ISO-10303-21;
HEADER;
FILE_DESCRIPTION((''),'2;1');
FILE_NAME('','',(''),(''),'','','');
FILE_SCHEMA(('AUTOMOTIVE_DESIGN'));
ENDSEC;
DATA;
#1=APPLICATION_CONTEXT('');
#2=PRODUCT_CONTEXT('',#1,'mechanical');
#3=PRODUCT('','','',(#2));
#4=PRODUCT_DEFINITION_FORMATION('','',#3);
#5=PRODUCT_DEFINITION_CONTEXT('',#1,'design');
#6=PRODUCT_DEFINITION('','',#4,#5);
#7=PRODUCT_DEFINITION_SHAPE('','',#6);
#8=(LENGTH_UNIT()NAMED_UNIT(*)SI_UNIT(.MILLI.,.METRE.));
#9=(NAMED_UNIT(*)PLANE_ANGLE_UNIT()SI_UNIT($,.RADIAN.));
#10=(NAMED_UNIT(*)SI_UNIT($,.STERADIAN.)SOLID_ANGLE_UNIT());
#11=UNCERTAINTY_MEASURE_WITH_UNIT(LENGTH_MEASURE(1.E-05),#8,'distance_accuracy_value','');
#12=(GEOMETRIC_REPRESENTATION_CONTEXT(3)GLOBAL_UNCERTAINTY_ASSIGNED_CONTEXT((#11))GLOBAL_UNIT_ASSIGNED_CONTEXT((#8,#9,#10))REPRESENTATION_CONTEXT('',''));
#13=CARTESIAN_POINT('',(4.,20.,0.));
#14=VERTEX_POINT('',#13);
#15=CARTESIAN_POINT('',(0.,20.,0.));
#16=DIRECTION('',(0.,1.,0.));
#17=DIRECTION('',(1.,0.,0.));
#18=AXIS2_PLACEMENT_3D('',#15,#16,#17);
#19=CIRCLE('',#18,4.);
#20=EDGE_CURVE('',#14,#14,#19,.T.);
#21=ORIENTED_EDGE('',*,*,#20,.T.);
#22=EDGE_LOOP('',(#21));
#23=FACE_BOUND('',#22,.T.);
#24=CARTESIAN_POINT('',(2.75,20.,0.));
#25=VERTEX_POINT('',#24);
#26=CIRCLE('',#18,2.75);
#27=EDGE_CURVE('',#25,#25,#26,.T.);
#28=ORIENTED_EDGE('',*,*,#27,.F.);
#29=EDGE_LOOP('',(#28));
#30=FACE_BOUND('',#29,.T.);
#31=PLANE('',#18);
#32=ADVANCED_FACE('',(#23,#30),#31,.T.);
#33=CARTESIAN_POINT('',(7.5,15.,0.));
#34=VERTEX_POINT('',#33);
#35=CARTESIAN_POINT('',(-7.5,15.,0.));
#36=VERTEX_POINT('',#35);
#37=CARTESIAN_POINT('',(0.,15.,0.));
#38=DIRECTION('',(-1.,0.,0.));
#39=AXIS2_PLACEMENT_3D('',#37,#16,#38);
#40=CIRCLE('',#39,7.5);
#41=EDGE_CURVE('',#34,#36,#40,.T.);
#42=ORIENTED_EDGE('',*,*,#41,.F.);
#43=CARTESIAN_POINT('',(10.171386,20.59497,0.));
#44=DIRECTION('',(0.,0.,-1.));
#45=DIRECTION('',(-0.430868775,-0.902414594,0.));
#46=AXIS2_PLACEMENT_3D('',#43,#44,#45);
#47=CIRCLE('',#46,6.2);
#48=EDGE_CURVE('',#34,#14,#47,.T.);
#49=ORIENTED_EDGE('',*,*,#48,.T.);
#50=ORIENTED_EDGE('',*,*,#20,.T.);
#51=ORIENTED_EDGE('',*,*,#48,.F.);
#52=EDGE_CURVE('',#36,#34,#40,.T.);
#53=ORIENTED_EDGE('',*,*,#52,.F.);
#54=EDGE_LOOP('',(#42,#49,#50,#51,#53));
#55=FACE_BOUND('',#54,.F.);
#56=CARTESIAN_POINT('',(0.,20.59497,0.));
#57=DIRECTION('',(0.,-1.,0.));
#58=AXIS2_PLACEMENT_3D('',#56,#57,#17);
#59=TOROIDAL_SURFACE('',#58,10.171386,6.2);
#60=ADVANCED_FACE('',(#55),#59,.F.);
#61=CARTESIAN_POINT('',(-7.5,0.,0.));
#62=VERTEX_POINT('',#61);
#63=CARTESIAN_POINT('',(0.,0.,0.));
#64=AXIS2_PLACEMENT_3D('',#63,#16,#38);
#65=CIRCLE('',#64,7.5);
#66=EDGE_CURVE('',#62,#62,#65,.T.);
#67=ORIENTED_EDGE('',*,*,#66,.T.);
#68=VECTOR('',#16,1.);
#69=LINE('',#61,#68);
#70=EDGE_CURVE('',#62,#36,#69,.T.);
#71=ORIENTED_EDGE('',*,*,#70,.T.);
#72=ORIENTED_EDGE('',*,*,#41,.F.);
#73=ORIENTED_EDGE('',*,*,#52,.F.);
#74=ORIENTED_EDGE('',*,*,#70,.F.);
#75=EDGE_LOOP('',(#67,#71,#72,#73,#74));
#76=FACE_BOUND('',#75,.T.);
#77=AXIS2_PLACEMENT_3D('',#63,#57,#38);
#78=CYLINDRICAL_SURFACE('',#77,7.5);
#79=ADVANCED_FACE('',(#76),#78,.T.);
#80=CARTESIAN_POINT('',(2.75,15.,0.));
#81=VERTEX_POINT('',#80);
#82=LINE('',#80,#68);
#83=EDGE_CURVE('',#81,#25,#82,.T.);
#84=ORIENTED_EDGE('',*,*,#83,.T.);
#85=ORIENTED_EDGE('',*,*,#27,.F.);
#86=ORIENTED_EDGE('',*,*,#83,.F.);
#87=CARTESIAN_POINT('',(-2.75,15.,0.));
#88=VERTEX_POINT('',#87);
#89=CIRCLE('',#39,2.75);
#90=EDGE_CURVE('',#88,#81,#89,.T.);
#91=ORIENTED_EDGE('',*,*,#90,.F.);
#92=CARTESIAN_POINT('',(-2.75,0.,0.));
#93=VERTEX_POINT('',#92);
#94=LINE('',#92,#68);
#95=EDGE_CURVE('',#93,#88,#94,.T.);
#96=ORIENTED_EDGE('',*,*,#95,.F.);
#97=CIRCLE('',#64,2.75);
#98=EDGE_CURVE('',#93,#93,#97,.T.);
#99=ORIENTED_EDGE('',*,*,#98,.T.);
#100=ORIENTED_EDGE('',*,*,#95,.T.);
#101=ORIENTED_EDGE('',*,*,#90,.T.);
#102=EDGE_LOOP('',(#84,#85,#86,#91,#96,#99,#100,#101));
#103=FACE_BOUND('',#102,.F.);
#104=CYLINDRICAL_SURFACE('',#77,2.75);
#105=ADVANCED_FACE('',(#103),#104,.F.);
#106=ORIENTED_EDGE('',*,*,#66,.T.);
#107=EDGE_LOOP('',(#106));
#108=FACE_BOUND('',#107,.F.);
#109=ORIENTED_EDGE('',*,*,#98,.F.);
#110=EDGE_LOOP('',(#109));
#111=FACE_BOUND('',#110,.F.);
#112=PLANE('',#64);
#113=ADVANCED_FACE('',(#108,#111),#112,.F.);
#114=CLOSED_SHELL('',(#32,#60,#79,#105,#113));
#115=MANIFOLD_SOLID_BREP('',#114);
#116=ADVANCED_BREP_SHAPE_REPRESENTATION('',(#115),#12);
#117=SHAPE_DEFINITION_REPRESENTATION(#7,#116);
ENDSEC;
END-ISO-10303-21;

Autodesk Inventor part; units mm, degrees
ref_plane "YZ Plane" through (0, 0, 0) normal (1, 0, 0) x (0, 1, 0)
ref_plane "XZ Plane" through (0, 0, 0) normal (0, 1, 0) x (-1, 0, 0)
ref_plane "XY Plane" through (0, 0, 0) normal (0, 0, 1) x (1, 0, 0)
sketch "Sketch1" plane through (0, 0, 0) normal (0, 1, 0) x (-1, 0, 0)
  circle A0 centre (0, 0) radius 7.5
  circle A1 centre (0, 0) radius 2.75
  dimension "d0" = 15
  dimension "d1" = 5.5
extrude "Extrusion1" add sketch "Sketch1" along normal blind 15
sketch "Sketch2" plane through (0, 15, 0) normal (0, 1, 0) x (1, 0, 0)
  circle A0 centre (0, 0) radius 2.75
  circle A1 centre (0, 0) radius 2.75 projected
  circle A2 centre (0, 0) radius 4
  dimension "d4" = 5.5
  dimension "d5" = 8
extrude "Extrusion2" add sketch "Sketch2" along normal blind 5
fillet "Fillet1" radius 6.2 1 edges at (-4, 15, 0)
properties part number "Rollder_Spacer_Single"
